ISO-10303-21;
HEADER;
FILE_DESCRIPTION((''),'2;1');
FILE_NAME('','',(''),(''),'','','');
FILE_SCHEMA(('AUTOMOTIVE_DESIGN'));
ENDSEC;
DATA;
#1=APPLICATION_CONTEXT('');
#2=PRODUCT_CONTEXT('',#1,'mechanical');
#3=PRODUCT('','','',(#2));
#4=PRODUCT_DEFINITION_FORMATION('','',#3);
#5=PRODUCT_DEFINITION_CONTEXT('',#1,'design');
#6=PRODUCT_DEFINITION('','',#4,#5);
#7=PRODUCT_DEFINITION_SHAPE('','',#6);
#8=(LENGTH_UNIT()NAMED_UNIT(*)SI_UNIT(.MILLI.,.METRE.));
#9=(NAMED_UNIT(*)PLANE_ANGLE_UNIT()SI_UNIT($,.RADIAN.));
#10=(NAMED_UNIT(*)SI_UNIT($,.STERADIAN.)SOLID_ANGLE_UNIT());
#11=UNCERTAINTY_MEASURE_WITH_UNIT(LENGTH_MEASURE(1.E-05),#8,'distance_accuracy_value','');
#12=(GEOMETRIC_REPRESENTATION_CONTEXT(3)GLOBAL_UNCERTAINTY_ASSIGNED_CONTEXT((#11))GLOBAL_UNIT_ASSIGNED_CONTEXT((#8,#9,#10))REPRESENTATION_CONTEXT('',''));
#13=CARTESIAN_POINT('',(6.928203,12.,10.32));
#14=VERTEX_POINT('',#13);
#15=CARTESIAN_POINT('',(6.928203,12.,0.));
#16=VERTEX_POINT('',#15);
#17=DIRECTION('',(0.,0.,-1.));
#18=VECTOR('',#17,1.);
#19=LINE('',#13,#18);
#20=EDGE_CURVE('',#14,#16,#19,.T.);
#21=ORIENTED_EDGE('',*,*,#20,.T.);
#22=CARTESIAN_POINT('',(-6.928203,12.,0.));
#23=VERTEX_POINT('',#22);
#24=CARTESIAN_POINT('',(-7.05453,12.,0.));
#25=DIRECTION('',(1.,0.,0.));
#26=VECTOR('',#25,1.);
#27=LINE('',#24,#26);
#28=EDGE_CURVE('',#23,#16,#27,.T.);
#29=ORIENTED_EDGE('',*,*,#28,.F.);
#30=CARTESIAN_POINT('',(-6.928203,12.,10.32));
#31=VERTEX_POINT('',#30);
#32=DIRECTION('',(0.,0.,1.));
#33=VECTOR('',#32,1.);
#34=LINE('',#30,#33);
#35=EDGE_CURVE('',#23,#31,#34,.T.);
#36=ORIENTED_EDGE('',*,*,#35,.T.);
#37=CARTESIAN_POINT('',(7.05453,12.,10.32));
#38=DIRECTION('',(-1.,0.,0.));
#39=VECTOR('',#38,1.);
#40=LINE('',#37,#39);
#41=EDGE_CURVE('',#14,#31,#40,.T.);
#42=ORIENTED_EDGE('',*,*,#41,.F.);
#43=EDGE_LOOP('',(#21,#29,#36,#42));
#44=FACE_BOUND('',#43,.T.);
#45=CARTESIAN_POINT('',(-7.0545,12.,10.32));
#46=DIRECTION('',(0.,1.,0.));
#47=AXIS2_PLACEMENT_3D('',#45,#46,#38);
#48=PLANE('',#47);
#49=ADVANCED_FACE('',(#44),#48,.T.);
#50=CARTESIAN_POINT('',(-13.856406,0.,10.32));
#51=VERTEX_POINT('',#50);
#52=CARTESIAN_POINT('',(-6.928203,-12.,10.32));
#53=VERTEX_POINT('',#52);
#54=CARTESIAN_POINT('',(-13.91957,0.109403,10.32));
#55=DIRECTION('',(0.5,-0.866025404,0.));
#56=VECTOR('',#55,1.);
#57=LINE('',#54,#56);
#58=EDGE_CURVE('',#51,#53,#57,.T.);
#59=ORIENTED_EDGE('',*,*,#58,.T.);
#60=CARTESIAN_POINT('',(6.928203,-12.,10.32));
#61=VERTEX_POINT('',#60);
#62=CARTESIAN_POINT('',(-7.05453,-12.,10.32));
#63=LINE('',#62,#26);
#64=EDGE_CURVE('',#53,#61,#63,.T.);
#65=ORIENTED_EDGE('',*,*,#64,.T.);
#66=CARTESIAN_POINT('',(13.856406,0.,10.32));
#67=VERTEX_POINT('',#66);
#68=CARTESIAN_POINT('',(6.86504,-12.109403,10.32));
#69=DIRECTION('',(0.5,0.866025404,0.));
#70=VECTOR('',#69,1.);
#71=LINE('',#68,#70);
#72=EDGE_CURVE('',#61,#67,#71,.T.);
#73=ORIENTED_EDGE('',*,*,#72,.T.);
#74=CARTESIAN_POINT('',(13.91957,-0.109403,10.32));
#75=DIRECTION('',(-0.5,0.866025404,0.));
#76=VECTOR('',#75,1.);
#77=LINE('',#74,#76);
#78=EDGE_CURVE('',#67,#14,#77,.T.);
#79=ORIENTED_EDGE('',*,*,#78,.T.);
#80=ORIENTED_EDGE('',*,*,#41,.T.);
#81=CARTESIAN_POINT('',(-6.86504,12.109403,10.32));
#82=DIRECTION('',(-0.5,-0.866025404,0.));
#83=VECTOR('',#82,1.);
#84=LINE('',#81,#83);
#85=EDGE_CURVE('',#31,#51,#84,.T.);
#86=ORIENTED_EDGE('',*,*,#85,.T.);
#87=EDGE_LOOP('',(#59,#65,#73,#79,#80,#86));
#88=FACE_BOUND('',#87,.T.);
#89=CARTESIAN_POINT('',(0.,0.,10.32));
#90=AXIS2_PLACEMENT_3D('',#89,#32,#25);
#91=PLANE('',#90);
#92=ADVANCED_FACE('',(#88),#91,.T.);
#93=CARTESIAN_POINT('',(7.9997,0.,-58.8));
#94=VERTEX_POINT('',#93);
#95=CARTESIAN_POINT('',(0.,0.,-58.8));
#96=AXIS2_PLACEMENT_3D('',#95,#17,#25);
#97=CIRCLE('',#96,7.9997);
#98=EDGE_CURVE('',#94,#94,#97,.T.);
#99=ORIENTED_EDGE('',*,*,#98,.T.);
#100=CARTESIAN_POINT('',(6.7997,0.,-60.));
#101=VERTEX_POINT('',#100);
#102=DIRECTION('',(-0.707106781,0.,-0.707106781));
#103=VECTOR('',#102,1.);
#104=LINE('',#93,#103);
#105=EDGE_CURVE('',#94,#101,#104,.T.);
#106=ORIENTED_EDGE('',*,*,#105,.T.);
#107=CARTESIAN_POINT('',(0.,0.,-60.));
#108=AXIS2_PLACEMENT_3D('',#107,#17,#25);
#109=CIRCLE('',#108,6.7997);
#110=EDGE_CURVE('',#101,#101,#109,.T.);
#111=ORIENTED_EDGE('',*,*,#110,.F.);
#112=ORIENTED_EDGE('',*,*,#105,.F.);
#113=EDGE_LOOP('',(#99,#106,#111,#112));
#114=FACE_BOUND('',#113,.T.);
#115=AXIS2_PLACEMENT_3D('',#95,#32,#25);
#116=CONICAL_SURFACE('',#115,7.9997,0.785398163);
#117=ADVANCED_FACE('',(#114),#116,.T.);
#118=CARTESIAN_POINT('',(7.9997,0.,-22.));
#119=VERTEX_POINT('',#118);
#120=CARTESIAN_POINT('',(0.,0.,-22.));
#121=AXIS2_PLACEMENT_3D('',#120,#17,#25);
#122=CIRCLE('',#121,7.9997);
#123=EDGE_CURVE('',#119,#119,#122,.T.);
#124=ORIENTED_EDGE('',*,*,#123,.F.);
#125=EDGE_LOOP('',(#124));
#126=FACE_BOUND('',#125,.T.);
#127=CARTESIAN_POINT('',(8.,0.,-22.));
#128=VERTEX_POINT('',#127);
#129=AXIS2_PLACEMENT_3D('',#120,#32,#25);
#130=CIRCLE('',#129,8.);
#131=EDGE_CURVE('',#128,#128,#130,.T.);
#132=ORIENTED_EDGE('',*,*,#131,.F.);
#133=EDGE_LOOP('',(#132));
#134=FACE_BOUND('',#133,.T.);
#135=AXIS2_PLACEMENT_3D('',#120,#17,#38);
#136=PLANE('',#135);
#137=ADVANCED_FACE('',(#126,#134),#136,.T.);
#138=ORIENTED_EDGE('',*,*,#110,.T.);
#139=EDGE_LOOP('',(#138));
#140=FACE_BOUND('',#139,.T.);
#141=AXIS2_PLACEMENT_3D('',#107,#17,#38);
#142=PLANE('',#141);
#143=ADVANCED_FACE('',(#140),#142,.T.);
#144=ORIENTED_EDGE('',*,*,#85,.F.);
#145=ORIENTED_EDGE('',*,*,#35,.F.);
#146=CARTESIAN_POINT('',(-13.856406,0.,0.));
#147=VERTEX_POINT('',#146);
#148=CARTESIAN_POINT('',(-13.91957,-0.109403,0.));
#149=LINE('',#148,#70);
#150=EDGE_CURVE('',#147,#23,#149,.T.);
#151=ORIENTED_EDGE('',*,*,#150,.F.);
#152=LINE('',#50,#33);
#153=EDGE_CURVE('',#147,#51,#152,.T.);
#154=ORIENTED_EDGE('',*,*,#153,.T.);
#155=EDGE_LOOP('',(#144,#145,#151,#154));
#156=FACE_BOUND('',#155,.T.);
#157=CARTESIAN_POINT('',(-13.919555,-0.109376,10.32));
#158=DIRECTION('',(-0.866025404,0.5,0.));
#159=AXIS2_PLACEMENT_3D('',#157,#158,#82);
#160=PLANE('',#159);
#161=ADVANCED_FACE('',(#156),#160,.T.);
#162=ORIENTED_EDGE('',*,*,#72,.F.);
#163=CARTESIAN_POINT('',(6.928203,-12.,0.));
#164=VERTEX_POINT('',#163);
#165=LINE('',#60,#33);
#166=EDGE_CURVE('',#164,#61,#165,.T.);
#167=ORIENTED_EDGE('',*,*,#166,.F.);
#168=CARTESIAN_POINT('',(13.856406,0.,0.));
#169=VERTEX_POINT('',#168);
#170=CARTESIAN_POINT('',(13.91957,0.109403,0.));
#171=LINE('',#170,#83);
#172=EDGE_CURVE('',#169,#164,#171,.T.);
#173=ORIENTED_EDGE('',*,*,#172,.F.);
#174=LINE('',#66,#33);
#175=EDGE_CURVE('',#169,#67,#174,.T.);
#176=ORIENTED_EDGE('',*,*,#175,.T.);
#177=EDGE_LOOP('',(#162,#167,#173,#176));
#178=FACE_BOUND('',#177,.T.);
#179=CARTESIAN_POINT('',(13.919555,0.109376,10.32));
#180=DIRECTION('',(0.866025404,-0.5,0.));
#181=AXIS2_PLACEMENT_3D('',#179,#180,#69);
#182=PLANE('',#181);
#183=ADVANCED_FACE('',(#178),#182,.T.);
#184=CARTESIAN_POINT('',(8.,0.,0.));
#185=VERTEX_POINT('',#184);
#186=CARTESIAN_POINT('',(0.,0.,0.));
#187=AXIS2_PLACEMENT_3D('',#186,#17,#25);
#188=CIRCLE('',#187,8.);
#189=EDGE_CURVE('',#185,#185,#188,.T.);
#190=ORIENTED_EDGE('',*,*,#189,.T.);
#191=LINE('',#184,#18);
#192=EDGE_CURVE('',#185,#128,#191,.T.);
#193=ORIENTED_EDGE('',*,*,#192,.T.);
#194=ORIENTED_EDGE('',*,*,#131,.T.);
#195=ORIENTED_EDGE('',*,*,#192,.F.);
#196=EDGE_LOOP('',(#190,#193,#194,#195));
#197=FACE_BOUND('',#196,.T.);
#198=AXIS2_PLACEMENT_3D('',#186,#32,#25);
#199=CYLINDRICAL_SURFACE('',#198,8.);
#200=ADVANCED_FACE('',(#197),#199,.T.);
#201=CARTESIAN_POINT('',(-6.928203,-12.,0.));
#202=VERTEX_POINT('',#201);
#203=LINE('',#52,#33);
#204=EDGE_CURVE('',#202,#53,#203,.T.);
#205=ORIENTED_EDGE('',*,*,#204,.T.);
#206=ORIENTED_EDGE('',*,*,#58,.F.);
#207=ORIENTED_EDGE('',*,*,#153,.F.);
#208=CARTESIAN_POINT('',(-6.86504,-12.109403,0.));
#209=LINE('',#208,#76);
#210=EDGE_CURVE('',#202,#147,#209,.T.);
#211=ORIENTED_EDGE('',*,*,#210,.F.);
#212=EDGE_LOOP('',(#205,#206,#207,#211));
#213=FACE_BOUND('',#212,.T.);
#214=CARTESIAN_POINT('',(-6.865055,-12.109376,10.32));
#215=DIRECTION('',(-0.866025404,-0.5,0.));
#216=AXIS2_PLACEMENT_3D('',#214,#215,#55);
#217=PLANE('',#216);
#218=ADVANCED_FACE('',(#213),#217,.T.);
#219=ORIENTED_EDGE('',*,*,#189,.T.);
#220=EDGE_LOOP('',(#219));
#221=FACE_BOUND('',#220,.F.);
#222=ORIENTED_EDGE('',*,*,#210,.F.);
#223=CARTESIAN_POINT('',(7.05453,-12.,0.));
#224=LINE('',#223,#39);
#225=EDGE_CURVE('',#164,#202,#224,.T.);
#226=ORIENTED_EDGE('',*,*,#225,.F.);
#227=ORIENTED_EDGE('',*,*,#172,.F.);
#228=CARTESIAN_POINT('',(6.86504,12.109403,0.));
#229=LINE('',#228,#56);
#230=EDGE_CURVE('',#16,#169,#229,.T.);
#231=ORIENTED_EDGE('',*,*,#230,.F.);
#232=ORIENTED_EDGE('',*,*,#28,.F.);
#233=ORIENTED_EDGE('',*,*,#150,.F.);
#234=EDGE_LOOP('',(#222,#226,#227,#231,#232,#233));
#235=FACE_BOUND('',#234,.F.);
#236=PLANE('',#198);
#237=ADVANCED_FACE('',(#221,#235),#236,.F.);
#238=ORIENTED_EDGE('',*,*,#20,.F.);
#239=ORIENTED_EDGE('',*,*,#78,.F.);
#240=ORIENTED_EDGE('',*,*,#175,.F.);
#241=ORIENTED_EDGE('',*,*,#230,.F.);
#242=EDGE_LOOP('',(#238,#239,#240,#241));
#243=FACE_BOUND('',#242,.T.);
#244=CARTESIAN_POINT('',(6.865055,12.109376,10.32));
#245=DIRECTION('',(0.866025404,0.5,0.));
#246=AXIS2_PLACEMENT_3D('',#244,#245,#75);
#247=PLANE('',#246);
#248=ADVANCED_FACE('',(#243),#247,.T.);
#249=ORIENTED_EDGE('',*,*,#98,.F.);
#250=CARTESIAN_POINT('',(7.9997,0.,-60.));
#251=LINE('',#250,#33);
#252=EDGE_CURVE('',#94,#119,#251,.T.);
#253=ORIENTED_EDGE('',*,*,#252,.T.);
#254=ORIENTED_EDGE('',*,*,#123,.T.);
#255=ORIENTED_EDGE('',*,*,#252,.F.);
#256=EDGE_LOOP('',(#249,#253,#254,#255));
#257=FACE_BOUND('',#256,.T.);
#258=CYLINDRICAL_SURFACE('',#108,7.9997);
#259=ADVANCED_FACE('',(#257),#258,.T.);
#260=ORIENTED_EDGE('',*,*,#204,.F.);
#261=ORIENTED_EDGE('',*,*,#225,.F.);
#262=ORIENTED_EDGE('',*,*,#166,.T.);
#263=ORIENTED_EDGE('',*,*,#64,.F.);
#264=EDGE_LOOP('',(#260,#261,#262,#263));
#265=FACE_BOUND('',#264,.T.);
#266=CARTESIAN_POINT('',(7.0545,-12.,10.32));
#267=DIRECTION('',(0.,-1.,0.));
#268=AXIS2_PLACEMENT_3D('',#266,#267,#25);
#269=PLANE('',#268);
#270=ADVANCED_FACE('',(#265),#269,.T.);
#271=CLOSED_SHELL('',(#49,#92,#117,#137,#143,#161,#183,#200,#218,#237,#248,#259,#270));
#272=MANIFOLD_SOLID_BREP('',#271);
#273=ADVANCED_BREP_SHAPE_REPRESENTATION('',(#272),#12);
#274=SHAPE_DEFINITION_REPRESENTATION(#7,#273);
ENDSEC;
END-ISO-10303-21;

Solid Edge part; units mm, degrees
sketch "Sketch1" plane through (0, 0, 0) normal (0, 0, 1) x (1, 0, 0)
  circle A0 centre (0, 0) radius 13.92
  dimension "D1" = 27.84
extrude "Protrusion1" add sketch "Sketch1" along normal blind 10.32
sketch "Sketch2" plane through (0, 0, 0) normal (0, 0, -1) x (1, 0, 0)
  circle A0 centre (0, 0) radius 8
extrude "Protrusion2" add sketch "Sketch2" along normal blind 60
sketch "Sketch3" plane through (0, 0, -60) normal (0, 0, -1) x (1, 0, 0)
  circle A0 centre (0, 0) radius 7.9997
extrude "Cutout1" cut sketch "Sketch3" against normal blind 38 flip side to cut
chamfer "Chamfer_1" distance 1.2 angle 45 1 edges at (-7.9997, 0, -60)
sketch "Sketch4" plane through (0, 0, 10.32) normal (0, 0, 1) x (1, 0, 0)
  line L0 (-7.0545, 12) -> (7.0545, 12)
  dimension "D1" = 24
extrude "Cutout2" cut sketch "Sketch4" against normal up to next material side at (0, 12.05, 10.32)
pattern_circular "Pattern1" count 6 over 360 about axis through (0, 0, 10.32) along (0, 0, 1) of "Cutout2"
properties part number "24104865"
